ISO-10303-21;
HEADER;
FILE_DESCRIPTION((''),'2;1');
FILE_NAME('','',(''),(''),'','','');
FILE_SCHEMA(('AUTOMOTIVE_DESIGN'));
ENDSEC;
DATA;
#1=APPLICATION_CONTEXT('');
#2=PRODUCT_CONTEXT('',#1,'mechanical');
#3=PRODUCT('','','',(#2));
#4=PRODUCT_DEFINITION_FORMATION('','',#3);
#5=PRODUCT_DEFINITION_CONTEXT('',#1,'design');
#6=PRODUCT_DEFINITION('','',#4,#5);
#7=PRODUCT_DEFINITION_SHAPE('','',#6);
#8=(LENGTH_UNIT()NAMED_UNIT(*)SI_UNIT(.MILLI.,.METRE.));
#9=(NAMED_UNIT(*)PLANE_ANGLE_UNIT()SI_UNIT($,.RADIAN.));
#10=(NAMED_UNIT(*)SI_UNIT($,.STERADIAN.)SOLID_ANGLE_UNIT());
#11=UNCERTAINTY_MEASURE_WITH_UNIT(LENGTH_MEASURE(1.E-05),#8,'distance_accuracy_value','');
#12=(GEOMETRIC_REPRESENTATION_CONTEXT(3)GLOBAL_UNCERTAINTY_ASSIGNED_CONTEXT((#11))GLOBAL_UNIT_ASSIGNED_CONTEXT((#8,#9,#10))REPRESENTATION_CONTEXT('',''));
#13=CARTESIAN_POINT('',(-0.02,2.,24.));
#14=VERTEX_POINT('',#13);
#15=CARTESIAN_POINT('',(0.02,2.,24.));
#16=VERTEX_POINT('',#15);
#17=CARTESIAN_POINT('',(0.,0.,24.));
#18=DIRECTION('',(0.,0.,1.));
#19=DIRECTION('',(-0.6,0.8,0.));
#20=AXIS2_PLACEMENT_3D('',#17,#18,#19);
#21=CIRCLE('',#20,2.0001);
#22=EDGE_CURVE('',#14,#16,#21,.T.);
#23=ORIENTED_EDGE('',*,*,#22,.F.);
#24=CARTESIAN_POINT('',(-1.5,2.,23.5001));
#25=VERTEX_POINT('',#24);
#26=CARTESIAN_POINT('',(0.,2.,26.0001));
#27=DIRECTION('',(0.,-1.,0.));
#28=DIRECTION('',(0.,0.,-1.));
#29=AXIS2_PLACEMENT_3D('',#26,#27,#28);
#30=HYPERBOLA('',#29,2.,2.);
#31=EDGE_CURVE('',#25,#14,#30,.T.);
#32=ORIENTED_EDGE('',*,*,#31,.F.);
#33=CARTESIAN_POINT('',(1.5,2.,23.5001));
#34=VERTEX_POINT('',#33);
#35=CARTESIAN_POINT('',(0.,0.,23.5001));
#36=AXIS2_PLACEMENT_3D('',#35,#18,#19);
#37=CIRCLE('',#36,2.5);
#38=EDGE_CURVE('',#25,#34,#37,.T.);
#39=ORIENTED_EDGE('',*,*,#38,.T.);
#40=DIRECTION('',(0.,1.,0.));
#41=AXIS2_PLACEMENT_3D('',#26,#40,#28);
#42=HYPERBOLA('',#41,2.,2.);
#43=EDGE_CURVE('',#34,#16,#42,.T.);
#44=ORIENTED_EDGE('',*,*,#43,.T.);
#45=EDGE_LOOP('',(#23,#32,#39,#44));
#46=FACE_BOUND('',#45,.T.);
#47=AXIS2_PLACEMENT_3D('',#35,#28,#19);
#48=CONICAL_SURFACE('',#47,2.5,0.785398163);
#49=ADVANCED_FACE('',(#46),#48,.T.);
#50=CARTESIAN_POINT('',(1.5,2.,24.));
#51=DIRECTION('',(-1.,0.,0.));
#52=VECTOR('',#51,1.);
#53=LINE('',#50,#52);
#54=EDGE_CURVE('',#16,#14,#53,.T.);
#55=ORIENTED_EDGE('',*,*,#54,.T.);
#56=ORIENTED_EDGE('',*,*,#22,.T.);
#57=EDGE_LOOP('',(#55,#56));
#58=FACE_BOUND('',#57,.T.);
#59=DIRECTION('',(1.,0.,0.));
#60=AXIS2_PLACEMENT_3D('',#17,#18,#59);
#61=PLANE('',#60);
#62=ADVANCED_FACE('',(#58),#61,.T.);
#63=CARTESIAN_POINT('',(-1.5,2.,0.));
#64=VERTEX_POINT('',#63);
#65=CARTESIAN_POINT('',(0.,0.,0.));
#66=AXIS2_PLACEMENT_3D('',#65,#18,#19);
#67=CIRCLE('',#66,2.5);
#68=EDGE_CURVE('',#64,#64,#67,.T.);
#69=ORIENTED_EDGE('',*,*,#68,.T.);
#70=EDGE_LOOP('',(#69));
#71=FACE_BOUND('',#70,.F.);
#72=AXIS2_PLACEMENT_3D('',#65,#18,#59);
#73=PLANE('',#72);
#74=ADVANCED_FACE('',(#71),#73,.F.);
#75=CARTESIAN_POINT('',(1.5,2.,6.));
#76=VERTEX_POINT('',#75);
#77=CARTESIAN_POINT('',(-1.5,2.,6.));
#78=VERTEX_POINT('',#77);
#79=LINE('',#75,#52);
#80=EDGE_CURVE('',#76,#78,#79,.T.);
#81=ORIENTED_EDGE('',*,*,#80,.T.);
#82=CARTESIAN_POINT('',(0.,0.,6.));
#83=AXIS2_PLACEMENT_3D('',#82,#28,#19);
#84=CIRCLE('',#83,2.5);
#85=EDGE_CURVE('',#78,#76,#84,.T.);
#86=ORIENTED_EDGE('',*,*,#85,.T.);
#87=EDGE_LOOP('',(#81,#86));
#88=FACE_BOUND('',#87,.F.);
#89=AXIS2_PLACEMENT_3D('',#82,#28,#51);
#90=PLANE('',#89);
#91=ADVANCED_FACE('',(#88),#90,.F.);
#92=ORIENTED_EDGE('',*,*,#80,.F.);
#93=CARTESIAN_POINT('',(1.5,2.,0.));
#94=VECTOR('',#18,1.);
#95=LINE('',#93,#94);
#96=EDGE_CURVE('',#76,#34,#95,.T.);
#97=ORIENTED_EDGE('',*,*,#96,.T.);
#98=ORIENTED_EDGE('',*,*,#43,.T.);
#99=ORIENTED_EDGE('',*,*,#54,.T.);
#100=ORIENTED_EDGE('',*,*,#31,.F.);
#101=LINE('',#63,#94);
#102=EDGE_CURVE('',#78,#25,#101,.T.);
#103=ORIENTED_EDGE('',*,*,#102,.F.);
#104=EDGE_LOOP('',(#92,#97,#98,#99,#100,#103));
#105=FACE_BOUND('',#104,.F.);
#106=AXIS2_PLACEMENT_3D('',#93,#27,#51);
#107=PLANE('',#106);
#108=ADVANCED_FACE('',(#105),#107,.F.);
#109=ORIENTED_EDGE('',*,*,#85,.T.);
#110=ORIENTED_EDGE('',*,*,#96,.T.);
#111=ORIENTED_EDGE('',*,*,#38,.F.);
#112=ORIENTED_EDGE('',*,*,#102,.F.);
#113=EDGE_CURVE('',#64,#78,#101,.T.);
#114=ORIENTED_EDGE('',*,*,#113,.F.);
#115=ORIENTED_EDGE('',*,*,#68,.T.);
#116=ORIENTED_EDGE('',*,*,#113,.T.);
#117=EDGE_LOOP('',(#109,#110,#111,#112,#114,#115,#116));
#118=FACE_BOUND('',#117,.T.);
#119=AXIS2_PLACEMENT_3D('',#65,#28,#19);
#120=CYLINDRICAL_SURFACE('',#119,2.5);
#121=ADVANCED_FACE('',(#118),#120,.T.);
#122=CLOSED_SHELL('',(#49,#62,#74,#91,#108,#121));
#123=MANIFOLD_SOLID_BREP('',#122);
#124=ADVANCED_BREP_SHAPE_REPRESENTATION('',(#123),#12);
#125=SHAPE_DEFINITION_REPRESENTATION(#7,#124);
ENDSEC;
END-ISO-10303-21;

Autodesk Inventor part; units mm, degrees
ref_plane "YZ Plane" through (0, 0, 0) normal (1, 0, 0) x (0, 1, 0)
ref_plane "XZ Plane" through (0, 0, 0) normal (0, 1, 0) x (-1, 0, 0)
ref_plane "XY Plane" through (0, 0, 0) normal (0, 0, 1) x (1, 0, 0)
sketch "Sketch1" plane through (0, 0, 0) normal (0, 0, 1) x (1, 0, 0)
  circle A0 centre (0, 0) radius 2.5
  line L0 (-1.5, 2) -> (1.5, 2)
  dimension "d0" = 5
sketch "Sketch1 outline for Extrusion1" plane through (0, 0, 0) normal (0, 0, 1) x (1, 0, 0)
  line L0 (1.5, 2) -> (-1.5, 2)
  arc A0 (-1.5, 2) -> (1.5, 2) centre (0, 0) ccw
extrude "Extrusion1" add sketch "Sketch1 outline for Extrusion1" along normal blind 24
sketch "Sketch2" plane through (0, 0, 0) normal (0, 0, -1) x (-1, 0, 0)
  line L0 (-1.5, 2) -> (1.5, 2) projected
  arc A0 (-1.5, 2) -> (1.5, 2) centre (0, 0) ccw projected
  arc A1 (1.5, 2) -> (-1.5, 2) centre (0, 0) ccw
  dimension "d3" = 2.5
sketch "Sketch2 outline for Extrusion2" plane through (0, 0, 0) normal (0, 0, -1) x (-1, 0, 0)
  line L0 (-1.5, 2) -> (1.5, 2)
  arc A0 (1.5, 2) -> (-1.5, 2) centre (0, 0) ccw
extrude "Extrusion2" add sketch "Sketch2 outline for Extrusion2" against normal blind 6
chamfer "Chamfer1" distance 0.5 angle 45 1 edges at (0, -2.5, 24)
properties part number "Stepper Motor Shaft"
